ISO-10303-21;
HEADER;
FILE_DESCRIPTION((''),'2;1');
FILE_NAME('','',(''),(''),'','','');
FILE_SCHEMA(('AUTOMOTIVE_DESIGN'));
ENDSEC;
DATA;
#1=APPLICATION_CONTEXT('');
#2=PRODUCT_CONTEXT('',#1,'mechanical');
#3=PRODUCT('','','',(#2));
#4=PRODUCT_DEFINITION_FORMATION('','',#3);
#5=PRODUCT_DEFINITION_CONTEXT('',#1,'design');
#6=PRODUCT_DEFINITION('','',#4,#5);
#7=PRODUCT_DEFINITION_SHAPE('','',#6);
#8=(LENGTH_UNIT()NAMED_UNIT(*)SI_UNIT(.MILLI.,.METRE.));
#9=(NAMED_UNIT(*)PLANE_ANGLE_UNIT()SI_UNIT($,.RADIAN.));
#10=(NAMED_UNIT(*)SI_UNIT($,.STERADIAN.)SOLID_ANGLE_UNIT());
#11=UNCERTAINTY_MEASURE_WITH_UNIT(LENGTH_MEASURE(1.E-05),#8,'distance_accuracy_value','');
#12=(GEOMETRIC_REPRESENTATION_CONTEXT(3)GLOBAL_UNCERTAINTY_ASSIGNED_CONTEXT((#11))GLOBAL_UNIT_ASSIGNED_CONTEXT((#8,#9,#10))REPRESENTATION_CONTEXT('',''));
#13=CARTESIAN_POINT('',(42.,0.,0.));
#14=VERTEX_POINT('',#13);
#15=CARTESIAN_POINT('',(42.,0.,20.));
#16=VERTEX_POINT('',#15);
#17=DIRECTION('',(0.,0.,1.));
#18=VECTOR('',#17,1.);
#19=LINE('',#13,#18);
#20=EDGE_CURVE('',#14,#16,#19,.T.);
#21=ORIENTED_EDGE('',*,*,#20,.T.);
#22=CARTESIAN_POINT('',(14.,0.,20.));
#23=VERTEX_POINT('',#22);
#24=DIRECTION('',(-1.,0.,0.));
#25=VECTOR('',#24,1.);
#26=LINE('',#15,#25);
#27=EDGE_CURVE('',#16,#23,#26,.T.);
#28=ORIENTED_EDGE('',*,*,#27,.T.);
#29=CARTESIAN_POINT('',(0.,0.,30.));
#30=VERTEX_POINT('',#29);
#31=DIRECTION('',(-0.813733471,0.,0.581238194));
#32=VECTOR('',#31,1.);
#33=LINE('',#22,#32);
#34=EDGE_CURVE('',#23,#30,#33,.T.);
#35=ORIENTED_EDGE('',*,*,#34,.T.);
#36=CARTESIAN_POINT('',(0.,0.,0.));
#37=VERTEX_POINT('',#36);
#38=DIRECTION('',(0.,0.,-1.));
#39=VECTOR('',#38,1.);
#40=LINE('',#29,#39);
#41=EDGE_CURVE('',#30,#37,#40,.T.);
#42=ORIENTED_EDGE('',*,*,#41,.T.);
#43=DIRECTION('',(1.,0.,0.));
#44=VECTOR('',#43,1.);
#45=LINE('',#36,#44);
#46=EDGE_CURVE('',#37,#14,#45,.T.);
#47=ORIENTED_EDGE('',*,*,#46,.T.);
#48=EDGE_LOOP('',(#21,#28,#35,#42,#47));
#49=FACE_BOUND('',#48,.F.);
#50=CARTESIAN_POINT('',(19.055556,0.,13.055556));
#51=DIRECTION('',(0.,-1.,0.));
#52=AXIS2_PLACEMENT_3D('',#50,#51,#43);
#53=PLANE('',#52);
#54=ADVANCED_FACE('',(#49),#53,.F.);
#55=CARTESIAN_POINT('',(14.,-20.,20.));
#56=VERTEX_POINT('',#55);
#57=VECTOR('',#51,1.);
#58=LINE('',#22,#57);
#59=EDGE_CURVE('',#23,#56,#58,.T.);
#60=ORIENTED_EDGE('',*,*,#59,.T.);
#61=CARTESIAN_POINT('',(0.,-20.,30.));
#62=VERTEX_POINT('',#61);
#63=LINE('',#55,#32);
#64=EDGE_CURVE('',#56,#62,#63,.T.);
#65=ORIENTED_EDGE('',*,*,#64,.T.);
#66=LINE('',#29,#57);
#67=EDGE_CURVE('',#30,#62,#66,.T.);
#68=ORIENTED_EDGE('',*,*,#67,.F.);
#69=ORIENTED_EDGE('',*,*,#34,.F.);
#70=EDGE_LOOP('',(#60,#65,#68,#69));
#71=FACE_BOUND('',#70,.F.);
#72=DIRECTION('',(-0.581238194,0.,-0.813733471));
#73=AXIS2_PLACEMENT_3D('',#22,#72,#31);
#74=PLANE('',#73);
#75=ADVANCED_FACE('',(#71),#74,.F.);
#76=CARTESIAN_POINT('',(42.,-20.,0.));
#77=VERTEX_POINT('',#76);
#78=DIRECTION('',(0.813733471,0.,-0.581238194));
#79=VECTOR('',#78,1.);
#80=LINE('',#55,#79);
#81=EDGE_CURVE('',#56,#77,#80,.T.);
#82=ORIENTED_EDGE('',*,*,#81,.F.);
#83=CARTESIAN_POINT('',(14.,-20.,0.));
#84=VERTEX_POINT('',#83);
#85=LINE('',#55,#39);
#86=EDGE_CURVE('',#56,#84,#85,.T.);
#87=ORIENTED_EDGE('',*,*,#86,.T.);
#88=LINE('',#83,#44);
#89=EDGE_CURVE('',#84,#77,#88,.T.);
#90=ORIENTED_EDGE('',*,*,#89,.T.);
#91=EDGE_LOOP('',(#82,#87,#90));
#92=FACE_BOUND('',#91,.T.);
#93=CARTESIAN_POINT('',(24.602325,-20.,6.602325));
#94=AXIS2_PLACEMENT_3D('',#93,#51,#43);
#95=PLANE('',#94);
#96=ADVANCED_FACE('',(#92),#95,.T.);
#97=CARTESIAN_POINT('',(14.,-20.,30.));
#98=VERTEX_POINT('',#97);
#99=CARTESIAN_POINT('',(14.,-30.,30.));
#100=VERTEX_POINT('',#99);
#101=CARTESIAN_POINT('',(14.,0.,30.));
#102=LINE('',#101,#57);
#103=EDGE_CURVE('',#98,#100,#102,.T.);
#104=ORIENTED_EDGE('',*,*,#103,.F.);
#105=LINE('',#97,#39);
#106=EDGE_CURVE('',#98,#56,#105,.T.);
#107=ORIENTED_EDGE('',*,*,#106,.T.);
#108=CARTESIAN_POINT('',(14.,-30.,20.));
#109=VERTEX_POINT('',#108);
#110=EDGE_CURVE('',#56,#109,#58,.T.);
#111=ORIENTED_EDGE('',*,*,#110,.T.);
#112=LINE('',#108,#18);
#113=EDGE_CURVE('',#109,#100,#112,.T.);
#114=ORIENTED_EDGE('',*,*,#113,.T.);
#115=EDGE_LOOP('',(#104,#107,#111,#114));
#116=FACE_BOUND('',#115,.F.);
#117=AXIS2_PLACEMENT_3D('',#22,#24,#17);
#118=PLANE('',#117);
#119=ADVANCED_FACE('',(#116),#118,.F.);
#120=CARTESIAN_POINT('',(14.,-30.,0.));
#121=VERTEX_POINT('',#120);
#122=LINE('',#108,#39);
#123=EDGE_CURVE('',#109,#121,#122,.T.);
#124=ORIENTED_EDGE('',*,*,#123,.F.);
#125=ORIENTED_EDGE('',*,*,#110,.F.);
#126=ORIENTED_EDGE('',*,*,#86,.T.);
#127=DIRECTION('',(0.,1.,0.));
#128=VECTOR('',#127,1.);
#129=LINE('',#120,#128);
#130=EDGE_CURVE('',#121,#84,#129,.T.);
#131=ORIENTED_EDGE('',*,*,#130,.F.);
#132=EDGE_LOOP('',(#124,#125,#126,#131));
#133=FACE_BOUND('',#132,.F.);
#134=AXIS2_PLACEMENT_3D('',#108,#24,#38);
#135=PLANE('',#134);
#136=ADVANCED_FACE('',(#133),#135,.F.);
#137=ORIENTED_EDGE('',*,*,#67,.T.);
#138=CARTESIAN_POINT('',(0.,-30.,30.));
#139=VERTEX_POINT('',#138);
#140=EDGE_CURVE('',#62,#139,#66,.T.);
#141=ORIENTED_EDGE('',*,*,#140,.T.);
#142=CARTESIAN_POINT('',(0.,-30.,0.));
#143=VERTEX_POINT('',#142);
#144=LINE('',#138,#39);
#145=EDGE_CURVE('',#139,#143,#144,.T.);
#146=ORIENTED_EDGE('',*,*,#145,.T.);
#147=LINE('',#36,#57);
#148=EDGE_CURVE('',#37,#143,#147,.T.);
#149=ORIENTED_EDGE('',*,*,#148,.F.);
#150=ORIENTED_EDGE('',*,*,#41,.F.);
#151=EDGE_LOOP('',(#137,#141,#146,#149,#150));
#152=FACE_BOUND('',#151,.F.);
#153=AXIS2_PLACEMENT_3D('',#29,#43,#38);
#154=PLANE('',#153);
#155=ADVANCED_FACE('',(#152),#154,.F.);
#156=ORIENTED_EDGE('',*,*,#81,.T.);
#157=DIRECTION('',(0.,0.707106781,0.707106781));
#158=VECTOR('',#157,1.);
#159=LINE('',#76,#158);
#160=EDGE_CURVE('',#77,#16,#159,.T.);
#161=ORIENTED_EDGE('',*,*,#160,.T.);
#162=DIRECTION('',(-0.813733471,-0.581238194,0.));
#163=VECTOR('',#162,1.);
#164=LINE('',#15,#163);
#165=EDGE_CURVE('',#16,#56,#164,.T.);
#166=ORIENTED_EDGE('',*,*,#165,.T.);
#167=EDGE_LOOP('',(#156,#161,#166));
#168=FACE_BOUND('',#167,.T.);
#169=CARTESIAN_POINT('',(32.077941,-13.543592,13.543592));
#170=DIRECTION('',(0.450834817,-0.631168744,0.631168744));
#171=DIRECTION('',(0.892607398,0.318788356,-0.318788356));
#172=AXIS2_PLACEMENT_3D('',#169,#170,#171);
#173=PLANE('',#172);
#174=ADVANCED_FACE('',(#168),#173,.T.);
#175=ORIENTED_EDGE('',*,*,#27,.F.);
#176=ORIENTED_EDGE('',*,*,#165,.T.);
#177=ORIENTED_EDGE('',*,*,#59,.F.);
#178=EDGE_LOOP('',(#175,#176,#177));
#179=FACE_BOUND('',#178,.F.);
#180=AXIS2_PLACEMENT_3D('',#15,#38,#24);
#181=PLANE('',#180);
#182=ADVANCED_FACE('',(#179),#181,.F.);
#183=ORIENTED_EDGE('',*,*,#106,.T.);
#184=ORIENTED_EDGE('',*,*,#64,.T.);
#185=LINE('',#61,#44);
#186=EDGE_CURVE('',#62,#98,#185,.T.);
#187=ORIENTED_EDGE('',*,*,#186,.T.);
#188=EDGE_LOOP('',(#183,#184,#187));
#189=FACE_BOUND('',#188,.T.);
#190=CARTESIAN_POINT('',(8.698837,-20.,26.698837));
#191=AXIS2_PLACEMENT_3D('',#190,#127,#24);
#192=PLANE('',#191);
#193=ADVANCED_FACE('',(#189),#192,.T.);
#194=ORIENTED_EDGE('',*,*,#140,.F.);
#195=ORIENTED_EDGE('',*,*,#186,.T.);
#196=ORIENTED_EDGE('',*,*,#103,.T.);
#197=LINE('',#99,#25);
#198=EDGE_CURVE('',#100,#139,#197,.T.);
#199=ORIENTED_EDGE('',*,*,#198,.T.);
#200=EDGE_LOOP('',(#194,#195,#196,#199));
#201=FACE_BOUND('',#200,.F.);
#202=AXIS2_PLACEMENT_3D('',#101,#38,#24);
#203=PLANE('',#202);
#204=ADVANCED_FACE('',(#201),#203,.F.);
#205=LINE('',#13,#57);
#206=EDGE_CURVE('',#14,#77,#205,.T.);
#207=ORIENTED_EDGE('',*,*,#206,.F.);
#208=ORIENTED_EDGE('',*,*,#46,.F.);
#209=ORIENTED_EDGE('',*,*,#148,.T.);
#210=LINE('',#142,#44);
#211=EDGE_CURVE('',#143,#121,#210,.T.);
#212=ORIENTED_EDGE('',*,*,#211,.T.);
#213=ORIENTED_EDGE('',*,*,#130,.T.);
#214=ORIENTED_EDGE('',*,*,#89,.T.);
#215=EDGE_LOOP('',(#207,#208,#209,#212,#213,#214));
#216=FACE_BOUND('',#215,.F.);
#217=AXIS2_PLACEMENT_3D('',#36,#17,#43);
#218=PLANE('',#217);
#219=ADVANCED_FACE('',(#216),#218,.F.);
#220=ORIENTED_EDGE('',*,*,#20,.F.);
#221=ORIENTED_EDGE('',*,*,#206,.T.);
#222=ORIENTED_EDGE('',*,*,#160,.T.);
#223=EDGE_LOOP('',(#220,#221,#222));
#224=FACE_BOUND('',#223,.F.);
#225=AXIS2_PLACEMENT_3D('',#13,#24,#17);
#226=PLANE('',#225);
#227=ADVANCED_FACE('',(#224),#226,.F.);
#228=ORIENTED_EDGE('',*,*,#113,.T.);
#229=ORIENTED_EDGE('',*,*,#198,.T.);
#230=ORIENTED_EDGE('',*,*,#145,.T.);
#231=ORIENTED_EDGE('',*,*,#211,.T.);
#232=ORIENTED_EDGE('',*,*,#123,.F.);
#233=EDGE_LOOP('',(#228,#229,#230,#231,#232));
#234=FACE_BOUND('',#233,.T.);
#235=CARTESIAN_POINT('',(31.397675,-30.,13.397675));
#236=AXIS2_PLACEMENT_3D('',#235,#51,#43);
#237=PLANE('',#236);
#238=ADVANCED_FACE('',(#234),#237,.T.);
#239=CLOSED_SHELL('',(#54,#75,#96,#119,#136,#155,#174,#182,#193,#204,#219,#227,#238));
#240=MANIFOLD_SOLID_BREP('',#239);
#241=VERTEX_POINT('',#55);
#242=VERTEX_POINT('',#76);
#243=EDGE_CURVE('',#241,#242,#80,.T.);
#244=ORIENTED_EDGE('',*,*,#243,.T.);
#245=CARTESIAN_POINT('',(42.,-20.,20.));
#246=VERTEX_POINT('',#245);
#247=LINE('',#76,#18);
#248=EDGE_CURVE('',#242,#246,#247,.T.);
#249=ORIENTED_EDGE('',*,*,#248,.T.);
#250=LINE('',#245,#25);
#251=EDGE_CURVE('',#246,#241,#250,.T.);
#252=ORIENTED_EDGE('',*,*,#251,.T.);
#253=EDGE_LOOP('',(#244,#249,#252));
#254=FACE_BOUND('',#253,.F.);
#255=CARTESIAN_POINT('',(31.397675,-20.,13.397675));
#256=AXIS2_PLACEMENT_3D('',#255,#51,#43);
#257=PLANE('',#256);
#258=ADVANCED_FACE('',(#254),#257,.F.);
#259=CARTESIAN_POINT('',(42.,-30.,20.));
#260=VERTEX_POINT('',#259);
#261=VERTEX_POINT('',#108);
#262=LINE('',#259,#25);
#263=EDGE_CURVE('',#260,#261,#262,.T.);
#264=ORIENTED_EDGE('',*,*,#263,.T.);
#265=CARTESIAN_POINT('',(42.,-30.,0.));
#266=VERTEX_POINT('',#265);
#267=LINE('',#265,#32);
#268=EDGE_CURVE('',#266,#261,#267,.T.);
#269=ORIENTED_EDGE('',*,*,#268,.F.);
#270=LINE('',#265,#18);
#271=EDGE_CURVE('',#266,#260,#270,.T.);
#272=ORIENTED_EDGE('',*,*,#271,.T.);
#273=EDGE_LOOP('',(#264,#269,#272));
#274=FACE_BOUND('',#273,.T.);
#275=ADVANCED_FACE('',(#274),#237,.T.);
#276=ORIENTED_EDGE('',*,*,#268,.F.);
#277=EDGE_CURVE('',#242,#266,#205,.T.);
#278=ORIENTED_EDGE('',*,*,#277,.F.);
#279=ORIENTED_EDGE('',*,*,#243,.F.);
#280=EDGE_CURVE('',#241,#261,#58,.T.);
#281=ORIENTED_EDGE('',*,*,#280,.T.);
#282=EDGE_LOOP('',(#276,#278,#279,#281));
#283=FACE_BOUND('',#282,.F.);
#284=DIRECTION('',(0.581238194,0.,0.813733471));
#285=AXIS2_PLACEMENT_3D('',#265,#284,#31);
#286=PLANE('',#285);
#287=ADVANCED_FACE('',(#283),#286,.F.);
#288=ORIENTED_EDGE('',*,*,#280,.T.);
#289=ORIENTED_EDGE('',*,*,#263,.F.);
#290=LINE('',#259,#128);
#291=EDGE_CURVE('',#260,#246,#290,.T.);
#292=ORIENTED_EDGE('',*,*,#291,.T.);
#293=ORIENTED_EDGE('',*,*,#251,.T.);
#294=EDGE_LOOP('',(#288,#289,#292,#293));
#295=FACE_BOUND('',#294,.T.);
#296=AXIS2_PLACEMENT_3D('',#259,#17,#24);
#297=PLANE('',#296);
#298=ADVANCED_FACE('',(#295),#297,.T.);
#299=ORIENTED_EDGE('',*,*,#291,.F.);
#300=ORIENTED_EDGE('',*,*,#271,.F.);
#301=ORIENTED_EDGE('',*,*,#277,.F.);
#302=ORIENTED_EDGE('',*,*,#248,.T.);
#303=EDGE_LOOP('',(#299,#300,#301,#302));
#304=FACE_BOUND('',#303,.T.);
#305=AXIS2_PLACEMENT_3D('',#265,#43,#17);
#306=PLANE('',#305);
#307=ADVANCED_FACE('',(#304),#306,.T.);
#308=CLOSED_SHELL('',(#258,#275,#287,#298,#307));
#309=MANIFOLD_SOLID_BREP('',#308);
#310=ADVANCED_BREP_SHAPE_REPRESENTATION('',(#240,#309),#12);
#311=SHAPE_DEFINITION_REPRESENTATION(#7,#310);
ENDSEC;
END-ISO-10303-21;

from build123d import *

# Parameters (mm, degrees)
F1_DEPTH  = 30
F3_DEPTH  = 20
F5_DEPTH  = 10
F8_DEPTH  = 25.2477497707
F9_DEPTH  = 10
F10_DEPTH = 10


with BuildPart() as f1:
    # F0 (on Front) → F1 (new body)
    with BuildSketch(Plane.XZ):
        Polygon((0, 30), (0, 0), (42, 0), (42, 20), (14, 20), (14, 30), align=None)
    extrude(amount=F1_DEPTH)

    # F2 (on face) → F3 (cut)
    with BuildSketch(Plane(origin=(0, 0, 0), x_dir=(-1, 0, 0), z_dir=(0, 1, 0))):
        Polygon((-14, 20), (0, 30), (-14, 30), align=None)
    extrude(amount=-F3_DEPTH, mode=Mode.SUBTRACT)

    # F4 (on face) → F5 (cut)
    with BuildSketch(Plane.XZ.offset(30)):
        Polygon((42, 20), (14, 20), (42, 0), align=None)
    extrude(amount=-F5_DEPTH, mode=Mode.SUBTRACT)

    # F7 (on 3pt) → F8 (cut, through all)
    with BuildSketch(Plane(origin=(14.2276422764, -19.918699187, 19.918699187), x_dir=(0.8926073983, 0.3187883565, -0.3187883565), z_dir=(0.4508348173, -0.6311687443, 0.6311687443))):
        Polygon((31.1137435975, 14.1421356237), (-0.2550306852, 0), (31.1137435975, -14.1421356237), align=None)
    extrude(amount=F8_DEPTH, mode=Mode.SUBTRACT)

    # F4 (on face) → F9 (join, through all)
    with BuildSketch(Plane.XZ.offset(30)):
        Polygon((42, 20), (14, 20), (42, 0), align=None)
    extrude(amount=-F9_DEPTH)

    # F4 (on face) → F10 (cut, through all)
    with BuildSketch(Plane.XZ.offset(30)):
        Polygon((42, 0), (14, 20), (14, 0), align=None)
    extrude(amount=-F10_DEPTH, mode=Mode.SUBTRACT)


solid = f1.part
